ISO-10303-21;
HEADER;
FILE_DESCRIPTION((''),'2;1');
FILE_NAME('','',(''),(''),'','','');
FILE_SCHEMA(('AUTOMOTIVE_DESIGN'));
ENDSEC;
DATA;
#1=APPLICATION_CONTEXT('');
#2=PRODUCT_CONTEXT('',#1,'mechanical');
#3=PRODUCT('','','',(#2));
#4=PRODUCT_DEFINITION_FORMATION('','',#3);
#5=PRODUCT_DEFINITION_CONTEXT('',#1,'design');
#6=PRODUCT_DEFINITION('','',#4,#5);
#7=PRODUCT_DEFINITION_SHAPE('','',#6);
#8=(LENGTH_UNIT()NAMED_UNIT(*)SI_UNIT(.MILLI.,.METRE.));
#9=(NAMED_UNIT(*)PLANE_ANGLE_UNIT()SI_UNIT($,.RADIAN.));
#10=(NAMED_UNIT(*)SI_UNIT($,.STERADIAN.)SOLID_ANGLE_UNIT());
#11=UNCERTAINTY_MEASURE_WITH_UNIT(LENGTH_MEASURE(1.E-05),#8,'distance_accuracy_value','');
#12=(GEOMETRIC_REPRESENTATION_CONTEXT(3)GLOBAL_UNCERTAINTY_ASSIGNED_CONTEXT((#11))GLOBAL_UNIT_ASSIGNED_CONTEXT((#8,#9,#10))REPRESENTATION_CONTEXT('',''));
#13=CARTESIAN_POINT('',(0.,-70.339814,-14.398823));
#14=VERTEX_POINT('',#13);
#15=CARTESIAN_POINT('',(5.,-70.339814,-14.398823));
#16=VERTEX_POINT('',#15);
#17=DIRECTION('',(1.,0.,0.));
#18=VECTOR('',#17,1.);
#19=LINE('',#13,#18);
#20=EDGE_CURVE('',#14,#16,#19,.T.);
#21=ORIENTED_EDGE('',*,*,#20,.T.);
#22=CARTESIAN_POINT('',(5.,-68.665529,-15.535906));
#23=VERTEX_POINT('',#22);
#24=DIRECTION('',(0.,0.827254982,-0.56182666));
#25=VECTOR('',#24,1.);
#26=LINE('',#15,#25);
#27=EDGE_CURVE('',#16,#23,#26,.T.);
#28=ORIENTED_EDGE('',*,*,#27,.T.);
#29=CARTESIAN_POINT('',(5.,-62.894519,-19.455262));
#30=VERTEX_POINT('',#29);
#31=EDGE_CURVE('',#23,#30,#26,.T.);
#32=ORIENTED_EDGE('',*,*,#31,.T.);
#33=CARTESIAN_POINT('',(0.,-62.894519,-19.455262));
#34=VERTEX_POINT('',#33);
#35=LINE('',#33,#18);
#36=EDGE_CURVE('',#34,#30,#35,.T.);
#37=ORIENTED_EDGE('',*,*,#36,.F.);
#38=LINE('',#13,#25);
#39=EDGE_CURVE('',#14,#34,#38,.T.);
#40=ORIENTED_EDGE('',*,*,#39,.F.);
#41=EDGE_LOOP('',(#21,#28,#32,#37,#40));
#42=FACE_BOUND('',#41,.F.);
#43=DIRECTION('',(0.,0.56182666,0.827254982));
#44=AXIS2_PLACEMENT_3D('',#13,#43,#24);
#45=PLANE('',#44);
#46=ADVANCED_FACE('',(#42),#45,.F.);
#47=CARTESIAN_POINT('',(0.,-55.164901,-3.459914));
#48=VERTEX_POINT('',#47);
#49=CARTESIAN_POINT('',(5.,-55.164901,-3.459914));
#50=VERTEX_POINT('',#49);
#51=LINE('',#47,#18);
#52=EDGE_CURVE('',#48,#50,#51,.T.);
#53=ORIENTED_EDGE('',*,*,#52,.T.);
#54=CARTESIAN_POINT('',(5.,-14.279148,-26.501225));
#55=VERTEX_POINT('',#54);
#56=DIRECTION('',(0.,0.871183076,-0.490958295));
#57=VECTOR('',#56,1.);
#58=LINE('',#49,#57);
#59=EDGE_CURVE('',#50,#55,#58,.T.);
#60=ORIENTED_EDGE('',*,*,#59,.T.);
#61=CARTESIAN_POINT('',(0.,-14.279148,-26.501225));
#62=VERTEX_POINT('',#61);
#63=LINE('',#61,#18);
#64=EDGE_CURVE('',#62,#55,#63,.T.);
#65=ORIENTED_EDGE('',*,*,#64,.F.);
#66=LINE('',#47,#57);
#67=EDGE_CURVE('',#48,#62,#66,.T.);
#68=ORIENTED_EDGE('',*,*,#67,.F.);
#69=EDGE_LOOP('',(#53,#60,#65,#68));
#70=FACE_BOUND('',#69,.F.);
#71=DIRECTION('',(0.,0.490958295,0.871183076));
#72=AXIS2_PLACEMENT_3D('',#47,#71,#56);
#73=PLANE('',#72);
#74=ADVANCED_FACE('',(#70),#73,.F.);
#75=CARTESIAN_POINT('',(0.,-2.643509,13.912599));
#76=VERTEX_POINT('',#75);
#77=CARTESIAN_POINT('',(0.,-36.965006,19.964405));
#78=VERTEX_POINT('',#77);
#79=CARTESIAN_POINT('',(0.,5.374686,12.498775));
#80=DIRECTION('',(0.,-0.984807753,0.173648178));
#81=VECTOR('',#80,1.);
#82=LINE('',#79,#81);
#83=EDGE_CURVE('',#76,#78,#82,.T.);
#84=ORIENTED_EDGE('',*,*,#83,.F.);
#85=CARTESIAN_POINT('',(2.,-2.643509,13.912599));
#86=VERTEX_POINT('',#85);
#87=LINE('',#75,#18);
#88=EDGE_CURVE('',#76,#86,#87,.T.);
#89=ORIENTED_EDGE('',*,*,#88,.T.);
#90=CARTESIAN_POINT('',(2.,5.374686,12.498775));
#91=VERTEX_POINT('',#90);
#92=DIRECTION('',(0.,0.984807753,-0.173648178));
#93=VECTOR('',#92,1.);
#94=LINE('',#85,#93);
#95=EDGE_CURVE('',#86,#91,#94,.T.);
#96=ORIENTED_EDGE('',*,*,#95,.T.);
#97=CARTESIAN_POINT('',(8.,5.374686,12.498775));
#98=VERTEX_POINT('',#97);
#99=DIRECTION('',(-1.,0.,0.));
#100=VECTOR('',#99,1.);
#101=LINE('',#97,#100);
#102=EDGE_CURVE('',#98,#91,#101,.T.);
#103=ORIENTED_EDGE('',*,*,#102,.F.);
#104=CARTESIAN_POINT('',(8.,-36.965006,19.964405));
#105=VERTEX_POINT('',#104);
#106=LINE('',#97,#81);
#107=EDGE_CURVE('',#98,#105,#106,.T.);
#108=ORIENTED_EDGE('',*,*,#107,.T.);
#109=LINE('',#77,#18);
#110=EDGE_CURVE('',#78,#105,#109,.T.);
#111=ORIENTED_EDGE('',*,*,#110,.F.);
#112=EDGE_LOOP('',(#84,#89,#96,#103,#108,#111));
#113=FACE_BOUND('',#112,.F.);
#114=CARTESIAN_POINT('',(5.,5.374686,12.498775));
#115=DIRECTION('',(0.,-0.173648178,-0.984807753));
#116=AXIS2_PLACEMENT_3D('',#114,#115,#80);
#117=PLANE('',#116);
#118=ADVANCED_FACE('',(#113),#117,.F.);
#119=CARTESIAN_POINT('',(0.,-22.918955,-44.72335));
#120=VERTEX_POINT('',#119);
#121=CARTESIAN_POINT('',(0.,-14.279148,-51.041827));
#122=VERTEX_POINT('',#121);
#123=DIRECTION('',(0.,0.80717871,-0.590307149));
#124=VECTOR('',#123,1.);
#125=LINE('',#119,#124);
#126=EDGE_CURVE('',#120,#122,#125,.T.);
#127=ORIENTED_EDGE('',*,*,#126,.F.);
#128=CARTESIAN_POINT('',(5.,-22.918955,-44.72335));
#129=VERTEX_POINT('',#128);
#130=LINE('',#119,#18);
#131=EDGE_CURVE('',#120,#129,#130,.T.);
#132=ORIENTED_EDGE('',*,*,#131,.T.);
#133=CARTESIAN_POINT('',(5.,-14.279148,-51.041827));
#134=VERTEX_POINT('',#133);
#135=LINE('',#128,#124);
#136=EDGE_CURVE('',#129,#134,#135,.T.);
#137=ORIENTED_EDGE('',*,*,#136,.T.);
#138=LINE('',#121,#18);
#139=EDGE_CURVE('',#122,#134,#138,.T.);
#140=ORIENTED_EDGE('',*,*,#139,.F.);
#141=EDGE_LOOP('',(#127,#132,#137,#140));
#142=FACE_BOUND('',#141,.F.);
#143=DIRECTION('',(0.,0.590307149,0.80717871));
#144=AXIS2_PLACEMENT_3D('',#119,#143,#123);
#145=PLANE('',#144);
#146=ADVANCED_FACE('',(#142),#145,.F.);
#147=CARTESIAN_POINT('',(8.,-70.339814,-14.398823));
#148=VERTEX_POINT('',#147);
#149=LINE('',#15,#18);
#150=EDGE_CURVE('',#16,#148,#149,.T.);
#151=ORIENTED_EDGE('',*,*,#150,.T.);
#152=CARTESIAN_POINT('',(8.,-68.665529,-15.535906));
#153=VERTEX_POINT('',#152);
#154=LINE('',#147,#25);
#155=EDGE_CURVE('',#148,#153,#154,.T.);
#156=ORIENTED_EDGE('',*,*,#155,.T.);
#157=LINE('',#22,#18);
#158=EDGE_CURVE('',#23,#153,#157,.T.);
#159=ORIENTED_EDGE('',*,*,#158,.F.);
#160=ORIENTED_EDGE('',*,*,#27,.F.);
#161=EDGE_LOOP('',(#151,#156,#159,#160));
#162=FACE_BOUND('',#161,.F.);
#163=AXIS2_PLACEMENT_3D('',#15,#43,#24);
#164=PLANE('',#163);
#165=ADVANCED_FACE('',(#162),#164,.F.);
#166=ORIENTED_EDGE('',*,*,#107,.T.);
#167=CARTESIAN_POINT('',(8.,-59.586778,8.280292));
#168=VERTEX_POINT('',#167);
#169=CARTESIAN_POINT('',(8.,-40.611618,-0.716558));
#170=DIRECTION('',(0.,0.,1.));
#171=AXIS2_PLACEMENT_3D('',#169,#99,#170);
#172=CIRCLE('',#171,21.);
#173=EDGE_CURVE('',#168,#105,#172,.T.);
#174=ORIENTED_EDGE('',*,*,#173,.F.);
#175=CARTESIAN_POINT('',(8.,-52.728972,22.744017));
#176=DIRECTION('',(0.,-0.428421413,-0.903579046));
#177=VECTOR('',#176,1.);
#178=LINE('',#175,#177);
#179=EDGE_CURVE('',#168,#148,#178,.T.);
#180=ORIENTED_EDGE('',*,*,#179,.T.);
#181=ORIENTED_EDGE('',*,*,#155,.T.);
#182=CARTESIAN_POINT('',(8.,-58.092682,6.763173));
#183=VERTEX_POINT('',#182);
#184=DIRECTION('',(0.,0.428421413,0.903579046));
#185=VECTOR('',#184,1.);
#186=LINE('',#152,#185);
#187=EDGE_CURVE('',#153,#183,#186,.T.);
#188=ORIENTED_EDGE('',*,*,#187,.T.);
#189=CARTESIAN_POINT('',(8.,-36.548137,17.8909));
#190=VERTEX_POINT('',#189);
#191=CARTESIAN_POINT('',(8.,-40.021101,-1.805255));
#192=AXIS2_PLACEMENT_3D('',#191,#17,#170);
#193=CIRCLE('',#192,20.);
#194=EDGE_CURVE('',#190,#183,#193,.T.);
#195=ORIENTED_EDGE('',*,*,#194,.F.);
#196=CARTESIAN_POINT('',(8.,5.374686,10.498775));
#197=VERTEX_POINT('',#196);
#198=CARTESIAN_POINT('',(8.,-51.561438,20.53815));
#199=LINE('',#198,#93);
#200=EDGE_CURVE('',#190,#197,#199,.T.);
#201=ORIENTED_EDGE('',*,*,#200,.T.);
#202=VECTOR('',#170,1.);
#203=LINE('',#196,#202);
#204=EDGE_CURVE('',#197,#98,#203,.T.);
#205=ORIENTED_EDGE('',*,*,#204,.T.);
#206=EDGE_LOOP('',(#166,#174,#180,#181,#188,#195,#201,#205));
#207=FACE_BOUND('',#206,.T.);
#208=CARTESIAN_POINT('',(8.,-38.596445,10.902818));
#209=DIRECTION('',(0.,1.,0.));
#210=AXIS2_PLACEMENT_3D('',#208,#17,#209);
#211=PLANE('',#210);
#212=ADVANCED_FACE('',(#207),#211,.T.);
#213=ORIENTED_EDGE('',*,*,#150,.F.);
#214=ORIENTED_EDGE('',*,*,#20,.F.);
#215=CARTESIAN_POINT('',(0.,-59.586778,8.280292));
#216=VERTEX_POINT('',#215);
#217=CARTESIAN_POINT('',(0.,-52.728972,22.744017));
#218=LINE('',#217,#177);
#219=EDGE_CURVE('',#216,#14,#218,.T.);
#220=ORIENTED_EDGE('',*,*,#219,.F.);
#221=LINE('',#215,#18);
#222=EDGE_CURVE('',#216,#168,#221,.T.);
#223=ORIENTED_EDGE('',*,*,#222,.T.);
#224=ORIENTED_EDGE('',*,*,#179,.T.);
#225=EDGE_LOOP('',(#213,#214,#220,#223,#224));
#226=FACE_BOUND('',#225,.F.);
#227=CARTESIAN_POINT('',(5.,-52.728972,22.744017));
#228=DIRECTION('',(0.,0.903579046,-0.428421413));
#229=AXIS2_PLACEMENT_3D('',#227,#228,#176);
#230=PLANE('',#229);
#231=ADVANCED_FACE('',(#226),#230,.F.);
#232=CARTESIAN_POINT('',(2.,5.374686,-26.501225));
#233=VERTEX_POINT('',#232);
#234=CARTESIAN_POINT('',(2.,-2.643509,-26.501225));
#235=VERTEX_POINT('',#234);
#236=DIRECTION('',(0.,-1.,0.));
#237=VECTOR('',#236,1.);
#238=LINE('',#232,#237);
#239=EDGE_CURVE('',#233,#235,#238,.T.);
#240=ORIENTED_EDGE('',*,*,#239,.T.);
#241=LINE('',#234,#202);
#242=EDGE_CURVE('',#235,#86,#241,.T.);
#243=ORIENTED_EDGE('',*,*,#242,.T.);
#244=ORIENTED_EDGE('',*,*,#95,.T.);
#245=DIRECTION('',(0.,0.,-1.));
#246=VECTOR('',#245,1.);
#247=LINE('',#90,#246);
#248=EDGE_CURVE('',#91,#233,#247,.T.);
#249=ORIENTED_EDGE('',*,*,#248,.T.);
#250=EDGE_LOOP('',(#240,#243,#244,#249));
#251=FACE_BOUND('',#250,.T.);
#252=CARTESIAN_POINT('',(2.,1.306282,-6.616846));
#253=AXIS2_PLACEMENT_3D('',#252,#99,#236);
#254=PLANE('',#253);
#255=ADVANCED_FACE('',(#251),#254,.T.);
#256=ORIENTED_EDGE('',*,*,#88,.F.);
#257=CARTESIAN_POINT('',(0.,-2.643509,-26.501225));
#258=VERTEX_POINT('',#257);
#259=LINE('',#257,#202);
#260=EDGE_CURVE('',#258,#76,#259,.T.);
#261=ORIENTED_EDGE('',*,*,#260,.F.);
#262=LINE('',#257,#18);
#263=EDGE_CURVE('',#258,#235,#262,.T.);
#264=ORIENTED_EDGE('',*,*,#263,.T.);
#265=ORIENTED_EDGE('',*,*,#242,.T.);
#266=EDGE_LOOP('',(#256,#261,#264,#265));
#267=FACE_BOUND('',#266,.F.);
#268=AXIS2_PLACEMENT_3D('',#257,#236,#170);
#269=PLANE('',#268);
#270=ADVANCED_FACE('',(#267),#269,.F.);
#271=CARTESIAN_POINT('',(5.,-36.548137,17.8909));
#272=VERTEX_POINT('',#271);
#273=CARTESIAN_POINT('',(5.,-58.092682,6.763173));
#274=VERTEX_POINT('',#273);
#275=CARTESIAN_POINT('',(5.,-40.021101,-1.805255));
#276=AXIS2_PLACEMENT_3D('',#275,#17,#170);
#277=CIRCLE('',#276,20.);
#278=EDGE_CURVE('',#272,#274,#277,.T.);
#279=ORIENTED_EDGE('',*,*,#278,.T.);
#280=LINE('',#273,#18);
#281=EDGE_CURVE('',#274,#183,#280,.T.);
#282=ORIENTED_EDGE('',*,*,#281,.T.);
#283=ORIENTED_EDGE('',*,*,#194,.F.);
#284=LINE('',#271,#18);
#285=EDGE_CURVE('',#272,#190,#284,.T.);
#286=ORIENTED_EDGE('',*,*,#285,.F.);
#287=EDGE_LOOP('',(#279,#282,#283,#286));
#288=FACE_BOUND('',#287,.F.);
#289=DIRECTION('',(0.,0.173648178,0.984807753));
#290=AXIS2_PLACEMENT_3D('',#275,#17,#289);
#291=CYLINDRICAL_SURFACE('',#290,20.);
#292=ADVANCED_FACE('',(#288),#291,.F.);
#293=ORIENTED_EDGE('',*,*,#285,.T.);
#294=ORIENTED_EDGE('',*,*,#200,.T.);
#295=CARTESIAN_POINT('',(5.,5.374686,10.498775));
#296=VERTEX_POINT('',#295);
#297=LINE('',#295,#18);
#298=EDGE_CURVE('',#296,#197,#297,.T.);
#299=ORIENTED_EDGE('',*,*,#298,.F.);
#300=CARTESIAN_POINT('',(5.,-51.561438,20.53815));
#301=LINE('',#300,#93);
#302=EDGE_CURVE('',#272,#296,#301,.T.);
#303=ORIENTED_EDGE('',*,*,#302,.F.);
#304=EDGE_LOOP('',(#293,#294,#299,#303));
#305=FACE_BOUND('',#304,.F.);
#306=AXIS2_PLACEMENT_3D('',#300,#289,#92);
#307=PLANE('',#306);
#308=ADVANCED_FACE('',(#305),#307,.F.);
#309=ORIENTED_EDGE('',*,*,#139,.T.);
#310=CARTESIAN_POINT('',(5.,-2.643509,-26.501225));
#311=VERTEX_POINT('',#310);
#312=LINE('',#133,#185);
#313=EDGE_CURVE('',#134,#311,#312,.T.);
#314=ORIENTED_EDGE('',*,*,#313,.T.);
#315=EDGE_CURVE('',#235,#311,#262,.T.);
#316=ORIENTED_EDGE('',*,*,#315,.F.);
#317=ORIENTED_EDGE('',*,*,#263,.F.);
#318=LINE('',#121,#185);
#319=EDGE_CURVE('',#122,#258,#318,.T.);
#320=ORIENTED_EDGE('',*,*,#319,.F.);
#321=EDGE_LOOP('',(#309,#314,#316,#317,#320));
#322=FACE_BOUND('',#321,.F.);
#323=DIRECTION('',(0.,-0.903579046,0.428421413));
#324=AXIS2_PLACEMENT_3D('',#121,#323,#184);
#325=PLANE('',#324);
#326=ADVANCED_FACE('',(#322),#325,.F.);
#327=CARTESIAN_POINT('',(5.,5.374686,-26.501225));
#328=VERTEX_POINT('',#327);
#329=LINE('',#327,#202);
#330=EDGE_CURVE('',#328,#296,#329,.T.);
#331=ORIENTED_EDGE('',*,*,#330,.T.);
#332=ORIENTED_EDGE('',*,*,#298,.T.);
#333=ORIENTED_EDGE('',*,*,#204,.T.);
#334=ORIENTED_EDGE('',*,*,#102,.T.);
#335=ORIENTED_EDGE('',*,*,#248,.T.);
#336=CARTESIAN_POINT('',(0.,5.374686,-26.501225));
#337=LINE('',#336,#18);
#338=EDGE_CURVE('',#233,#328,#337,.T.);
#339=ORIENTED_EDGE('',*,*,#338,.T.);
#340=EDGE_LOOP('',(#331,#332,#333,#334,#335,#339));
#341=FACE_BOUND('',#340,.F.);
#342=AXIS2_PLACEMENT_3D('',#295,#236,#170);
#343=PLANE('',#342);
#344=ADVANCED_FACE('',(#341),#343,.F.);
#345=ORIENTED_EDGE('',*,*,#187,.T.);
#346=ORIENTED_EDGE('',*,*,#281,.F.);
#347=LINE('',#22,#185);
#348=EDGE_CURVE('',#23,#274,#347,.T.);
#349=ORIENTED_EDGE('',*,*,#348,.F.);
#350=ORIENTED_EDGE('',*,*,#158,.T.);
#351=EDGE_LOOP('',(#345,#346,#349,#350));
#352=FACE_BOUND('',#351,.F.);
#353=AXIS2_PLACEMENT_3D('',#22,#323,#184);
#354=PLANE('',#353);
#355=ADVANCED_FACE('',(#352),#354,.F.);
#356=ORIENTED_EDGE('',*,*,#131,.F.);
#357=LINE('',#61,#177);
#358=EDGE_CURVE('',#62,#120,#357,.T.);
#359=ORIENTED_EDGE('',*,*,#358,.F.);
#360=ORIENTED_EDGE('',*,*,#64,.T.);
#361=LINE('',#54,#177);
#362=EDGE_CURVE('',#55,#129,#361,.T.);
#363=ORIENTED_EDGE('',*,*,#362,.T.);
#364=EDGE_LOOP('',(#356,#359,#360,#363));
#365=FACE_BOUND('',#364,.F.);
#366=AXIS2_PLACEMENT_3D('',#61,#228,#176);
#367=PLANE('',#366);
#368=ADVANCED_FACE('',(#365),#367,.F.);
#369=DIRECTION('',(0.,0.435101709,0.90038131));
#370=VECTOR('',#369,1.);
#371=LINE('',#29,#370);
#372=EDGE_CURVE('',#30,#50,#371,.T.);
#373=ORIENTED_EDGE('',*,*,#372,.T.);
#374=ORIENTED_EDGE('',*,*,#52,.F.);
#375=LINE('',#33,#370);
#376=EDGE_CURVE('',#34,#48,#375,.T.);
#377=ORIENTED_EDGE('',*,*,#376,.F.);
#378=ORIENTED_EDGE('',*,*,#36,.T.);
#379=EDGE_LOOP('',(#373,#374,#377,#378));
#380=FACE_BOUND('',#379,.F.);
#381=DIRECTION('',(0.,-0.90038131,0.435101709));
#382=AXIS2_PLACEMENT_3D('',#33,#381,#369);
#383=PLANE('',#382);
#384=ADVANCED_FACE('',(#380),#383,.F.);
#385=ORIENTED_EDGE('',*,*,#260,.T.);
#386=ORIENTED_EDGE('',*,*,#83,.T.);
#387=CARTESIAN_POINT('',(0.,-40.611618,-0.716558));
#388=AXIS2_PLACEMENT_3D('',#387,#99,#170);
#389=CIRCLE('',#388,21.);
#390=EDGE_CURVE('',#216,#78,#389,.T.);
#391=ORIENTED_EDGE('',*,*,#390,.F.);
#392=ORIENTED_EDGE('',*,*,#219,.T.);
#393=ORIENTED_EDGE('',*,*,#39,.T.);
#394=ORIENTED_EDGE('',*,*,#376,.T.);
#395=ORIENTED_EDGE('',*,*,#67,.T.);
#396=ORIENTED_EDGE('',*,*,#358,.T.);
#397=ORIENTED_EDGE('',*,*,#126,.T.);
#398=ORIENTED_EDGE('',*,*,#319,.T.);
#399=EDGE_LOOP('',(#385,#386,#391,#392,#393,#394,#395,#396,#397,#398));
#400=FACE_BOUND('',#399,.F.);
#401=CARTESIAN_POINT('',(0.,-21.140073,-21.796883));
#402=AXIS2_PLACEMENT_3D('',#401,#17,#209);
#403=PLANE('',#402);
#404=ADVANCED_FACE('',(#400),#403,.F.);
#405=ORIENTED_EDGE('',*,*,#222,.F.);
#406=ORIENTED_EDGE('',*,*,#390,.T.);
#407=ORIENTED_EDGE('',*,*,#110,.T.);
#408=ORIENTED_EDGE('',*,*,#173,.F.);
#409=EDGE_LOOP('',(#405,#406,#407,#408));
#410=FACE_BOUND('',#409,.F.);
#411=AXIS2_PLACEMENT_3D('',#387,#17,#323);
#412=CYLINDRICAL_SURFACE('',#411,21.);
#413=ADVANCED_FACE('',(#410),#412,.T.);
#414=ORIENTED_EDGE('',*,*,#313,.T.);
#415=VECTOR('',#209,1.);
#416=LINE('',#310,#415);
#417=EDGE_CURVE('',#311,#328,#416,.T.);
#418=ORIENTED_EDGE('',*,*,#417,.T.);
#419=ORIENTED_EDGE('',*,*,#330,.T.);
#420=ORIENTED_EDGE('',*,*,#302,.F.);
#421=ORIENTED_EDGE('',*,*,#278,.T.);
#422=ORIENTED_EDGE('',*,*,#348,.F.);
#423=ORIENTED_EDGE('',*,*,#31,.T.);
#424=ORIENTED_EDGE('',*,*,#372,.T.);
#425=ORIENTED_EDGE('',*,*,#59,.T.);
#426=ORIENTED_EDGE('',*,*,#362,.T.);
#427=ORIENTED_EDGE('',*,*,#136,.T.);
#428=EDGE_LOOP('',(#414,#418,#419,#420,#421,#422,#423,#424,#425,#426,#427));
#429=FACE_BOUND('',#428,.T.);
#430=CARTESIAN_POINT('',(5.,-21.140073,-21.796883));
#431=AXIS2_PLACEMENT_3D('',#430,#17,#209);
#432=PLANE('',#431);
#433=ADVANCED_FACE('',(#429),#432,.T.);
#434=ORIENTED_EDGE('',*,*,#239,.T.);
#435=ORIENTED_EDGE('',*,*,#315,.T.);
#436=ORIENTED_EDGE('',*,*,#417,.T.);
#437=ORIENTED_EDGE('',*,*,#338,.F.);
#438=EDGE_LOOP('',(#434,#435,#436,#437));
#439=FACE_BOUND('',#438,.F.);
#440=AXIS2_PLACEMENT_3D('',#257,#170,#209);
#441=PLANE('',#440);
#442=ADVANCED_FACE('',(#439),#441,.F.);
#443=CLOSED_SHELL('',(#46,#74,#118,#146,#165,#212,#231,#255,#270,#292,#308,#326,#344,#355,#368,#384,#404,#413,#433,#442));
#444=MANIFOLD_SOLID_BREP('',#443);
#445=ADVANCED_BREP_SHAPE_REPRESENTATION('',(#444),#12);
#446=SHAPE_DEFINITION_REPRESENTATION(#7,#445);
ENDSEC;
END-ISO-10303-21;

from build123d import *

# Parameters (mm, degrees)
F1_DEPTH = 5
F3_DEPTH = 3
F4_R     = 20
F5_R     = 21
F7_DEPTH = 2


with BuildPart() as f1:
    # F0 (on Right) → F1 (new body)
    with BuildSketch(Plane.YZ):
        Polygon((-2.6435090923, -26.501225133), (5.3746857459, -26.501225133), (5.3746857459, -16.4436940104), (-55.1649013234, -3.4599144195), (-14.2791476101, -26.501225133), (-22.9189545176, -44.7233500122), (-14.2791476101, -51.0418266058), align=None)
        Polygon((-55.1649013234, -3.4599144195), (5.3746857459, -16.4436940104), (5.3746857459, 12.498774867), (-52.7289716819, 22.7440173494), (-70.3398138285, -14.3988225609), (-62.8945189948, -19.4552624983), align=None)
    extrude(amount=F1_DEPTH)

    # F2 (on face) → F3 (join)
    with BuildSketch(Plane.YZ.offset(5)):
        Polygon((5.3746857459, 12.498774867), (-52.7289716819, 22.7440173494), (-70.3398138285, -14.3988225609), (-68.6655286126, -15.5359061582), (-51.5614379211, 20.5381496464), (5.3746857459, 10.498774867), align=None)
    extrude(amount=F3_DEPTH)

    # F4
    f4_edges = [f1.edges().sort_by_distance(p)[0] for p in [
        (6.5, -51.561438, 20.53815),
    ]]
    fillet(f4_edges, radius=F4_R)

    # F5
    f5_edges = [f1.edges().sort_by_distance(p)[0] for p in [
        (4, -52.728972, 22.744017),
    ]]
    fillet(f5_edges, radius=F5_R)

    # F6 (on face) → F7 (cut)
    with BuildSketch(Plane(origin=(0, 0, 0), x_dir=(0, -1, 0), z_dir=(-1, 0, 0))):
        Polygon((2.6435090923, 13.9125989535), (-5.3746857459, 12.498774867), (-5.3746857459, -26.501225133), (2.6435090923, -26.501225133), align=None)
    extrude(amount=-F7_DEPTH, mode=Mode.SUBTRACT)


solid = f1.part
